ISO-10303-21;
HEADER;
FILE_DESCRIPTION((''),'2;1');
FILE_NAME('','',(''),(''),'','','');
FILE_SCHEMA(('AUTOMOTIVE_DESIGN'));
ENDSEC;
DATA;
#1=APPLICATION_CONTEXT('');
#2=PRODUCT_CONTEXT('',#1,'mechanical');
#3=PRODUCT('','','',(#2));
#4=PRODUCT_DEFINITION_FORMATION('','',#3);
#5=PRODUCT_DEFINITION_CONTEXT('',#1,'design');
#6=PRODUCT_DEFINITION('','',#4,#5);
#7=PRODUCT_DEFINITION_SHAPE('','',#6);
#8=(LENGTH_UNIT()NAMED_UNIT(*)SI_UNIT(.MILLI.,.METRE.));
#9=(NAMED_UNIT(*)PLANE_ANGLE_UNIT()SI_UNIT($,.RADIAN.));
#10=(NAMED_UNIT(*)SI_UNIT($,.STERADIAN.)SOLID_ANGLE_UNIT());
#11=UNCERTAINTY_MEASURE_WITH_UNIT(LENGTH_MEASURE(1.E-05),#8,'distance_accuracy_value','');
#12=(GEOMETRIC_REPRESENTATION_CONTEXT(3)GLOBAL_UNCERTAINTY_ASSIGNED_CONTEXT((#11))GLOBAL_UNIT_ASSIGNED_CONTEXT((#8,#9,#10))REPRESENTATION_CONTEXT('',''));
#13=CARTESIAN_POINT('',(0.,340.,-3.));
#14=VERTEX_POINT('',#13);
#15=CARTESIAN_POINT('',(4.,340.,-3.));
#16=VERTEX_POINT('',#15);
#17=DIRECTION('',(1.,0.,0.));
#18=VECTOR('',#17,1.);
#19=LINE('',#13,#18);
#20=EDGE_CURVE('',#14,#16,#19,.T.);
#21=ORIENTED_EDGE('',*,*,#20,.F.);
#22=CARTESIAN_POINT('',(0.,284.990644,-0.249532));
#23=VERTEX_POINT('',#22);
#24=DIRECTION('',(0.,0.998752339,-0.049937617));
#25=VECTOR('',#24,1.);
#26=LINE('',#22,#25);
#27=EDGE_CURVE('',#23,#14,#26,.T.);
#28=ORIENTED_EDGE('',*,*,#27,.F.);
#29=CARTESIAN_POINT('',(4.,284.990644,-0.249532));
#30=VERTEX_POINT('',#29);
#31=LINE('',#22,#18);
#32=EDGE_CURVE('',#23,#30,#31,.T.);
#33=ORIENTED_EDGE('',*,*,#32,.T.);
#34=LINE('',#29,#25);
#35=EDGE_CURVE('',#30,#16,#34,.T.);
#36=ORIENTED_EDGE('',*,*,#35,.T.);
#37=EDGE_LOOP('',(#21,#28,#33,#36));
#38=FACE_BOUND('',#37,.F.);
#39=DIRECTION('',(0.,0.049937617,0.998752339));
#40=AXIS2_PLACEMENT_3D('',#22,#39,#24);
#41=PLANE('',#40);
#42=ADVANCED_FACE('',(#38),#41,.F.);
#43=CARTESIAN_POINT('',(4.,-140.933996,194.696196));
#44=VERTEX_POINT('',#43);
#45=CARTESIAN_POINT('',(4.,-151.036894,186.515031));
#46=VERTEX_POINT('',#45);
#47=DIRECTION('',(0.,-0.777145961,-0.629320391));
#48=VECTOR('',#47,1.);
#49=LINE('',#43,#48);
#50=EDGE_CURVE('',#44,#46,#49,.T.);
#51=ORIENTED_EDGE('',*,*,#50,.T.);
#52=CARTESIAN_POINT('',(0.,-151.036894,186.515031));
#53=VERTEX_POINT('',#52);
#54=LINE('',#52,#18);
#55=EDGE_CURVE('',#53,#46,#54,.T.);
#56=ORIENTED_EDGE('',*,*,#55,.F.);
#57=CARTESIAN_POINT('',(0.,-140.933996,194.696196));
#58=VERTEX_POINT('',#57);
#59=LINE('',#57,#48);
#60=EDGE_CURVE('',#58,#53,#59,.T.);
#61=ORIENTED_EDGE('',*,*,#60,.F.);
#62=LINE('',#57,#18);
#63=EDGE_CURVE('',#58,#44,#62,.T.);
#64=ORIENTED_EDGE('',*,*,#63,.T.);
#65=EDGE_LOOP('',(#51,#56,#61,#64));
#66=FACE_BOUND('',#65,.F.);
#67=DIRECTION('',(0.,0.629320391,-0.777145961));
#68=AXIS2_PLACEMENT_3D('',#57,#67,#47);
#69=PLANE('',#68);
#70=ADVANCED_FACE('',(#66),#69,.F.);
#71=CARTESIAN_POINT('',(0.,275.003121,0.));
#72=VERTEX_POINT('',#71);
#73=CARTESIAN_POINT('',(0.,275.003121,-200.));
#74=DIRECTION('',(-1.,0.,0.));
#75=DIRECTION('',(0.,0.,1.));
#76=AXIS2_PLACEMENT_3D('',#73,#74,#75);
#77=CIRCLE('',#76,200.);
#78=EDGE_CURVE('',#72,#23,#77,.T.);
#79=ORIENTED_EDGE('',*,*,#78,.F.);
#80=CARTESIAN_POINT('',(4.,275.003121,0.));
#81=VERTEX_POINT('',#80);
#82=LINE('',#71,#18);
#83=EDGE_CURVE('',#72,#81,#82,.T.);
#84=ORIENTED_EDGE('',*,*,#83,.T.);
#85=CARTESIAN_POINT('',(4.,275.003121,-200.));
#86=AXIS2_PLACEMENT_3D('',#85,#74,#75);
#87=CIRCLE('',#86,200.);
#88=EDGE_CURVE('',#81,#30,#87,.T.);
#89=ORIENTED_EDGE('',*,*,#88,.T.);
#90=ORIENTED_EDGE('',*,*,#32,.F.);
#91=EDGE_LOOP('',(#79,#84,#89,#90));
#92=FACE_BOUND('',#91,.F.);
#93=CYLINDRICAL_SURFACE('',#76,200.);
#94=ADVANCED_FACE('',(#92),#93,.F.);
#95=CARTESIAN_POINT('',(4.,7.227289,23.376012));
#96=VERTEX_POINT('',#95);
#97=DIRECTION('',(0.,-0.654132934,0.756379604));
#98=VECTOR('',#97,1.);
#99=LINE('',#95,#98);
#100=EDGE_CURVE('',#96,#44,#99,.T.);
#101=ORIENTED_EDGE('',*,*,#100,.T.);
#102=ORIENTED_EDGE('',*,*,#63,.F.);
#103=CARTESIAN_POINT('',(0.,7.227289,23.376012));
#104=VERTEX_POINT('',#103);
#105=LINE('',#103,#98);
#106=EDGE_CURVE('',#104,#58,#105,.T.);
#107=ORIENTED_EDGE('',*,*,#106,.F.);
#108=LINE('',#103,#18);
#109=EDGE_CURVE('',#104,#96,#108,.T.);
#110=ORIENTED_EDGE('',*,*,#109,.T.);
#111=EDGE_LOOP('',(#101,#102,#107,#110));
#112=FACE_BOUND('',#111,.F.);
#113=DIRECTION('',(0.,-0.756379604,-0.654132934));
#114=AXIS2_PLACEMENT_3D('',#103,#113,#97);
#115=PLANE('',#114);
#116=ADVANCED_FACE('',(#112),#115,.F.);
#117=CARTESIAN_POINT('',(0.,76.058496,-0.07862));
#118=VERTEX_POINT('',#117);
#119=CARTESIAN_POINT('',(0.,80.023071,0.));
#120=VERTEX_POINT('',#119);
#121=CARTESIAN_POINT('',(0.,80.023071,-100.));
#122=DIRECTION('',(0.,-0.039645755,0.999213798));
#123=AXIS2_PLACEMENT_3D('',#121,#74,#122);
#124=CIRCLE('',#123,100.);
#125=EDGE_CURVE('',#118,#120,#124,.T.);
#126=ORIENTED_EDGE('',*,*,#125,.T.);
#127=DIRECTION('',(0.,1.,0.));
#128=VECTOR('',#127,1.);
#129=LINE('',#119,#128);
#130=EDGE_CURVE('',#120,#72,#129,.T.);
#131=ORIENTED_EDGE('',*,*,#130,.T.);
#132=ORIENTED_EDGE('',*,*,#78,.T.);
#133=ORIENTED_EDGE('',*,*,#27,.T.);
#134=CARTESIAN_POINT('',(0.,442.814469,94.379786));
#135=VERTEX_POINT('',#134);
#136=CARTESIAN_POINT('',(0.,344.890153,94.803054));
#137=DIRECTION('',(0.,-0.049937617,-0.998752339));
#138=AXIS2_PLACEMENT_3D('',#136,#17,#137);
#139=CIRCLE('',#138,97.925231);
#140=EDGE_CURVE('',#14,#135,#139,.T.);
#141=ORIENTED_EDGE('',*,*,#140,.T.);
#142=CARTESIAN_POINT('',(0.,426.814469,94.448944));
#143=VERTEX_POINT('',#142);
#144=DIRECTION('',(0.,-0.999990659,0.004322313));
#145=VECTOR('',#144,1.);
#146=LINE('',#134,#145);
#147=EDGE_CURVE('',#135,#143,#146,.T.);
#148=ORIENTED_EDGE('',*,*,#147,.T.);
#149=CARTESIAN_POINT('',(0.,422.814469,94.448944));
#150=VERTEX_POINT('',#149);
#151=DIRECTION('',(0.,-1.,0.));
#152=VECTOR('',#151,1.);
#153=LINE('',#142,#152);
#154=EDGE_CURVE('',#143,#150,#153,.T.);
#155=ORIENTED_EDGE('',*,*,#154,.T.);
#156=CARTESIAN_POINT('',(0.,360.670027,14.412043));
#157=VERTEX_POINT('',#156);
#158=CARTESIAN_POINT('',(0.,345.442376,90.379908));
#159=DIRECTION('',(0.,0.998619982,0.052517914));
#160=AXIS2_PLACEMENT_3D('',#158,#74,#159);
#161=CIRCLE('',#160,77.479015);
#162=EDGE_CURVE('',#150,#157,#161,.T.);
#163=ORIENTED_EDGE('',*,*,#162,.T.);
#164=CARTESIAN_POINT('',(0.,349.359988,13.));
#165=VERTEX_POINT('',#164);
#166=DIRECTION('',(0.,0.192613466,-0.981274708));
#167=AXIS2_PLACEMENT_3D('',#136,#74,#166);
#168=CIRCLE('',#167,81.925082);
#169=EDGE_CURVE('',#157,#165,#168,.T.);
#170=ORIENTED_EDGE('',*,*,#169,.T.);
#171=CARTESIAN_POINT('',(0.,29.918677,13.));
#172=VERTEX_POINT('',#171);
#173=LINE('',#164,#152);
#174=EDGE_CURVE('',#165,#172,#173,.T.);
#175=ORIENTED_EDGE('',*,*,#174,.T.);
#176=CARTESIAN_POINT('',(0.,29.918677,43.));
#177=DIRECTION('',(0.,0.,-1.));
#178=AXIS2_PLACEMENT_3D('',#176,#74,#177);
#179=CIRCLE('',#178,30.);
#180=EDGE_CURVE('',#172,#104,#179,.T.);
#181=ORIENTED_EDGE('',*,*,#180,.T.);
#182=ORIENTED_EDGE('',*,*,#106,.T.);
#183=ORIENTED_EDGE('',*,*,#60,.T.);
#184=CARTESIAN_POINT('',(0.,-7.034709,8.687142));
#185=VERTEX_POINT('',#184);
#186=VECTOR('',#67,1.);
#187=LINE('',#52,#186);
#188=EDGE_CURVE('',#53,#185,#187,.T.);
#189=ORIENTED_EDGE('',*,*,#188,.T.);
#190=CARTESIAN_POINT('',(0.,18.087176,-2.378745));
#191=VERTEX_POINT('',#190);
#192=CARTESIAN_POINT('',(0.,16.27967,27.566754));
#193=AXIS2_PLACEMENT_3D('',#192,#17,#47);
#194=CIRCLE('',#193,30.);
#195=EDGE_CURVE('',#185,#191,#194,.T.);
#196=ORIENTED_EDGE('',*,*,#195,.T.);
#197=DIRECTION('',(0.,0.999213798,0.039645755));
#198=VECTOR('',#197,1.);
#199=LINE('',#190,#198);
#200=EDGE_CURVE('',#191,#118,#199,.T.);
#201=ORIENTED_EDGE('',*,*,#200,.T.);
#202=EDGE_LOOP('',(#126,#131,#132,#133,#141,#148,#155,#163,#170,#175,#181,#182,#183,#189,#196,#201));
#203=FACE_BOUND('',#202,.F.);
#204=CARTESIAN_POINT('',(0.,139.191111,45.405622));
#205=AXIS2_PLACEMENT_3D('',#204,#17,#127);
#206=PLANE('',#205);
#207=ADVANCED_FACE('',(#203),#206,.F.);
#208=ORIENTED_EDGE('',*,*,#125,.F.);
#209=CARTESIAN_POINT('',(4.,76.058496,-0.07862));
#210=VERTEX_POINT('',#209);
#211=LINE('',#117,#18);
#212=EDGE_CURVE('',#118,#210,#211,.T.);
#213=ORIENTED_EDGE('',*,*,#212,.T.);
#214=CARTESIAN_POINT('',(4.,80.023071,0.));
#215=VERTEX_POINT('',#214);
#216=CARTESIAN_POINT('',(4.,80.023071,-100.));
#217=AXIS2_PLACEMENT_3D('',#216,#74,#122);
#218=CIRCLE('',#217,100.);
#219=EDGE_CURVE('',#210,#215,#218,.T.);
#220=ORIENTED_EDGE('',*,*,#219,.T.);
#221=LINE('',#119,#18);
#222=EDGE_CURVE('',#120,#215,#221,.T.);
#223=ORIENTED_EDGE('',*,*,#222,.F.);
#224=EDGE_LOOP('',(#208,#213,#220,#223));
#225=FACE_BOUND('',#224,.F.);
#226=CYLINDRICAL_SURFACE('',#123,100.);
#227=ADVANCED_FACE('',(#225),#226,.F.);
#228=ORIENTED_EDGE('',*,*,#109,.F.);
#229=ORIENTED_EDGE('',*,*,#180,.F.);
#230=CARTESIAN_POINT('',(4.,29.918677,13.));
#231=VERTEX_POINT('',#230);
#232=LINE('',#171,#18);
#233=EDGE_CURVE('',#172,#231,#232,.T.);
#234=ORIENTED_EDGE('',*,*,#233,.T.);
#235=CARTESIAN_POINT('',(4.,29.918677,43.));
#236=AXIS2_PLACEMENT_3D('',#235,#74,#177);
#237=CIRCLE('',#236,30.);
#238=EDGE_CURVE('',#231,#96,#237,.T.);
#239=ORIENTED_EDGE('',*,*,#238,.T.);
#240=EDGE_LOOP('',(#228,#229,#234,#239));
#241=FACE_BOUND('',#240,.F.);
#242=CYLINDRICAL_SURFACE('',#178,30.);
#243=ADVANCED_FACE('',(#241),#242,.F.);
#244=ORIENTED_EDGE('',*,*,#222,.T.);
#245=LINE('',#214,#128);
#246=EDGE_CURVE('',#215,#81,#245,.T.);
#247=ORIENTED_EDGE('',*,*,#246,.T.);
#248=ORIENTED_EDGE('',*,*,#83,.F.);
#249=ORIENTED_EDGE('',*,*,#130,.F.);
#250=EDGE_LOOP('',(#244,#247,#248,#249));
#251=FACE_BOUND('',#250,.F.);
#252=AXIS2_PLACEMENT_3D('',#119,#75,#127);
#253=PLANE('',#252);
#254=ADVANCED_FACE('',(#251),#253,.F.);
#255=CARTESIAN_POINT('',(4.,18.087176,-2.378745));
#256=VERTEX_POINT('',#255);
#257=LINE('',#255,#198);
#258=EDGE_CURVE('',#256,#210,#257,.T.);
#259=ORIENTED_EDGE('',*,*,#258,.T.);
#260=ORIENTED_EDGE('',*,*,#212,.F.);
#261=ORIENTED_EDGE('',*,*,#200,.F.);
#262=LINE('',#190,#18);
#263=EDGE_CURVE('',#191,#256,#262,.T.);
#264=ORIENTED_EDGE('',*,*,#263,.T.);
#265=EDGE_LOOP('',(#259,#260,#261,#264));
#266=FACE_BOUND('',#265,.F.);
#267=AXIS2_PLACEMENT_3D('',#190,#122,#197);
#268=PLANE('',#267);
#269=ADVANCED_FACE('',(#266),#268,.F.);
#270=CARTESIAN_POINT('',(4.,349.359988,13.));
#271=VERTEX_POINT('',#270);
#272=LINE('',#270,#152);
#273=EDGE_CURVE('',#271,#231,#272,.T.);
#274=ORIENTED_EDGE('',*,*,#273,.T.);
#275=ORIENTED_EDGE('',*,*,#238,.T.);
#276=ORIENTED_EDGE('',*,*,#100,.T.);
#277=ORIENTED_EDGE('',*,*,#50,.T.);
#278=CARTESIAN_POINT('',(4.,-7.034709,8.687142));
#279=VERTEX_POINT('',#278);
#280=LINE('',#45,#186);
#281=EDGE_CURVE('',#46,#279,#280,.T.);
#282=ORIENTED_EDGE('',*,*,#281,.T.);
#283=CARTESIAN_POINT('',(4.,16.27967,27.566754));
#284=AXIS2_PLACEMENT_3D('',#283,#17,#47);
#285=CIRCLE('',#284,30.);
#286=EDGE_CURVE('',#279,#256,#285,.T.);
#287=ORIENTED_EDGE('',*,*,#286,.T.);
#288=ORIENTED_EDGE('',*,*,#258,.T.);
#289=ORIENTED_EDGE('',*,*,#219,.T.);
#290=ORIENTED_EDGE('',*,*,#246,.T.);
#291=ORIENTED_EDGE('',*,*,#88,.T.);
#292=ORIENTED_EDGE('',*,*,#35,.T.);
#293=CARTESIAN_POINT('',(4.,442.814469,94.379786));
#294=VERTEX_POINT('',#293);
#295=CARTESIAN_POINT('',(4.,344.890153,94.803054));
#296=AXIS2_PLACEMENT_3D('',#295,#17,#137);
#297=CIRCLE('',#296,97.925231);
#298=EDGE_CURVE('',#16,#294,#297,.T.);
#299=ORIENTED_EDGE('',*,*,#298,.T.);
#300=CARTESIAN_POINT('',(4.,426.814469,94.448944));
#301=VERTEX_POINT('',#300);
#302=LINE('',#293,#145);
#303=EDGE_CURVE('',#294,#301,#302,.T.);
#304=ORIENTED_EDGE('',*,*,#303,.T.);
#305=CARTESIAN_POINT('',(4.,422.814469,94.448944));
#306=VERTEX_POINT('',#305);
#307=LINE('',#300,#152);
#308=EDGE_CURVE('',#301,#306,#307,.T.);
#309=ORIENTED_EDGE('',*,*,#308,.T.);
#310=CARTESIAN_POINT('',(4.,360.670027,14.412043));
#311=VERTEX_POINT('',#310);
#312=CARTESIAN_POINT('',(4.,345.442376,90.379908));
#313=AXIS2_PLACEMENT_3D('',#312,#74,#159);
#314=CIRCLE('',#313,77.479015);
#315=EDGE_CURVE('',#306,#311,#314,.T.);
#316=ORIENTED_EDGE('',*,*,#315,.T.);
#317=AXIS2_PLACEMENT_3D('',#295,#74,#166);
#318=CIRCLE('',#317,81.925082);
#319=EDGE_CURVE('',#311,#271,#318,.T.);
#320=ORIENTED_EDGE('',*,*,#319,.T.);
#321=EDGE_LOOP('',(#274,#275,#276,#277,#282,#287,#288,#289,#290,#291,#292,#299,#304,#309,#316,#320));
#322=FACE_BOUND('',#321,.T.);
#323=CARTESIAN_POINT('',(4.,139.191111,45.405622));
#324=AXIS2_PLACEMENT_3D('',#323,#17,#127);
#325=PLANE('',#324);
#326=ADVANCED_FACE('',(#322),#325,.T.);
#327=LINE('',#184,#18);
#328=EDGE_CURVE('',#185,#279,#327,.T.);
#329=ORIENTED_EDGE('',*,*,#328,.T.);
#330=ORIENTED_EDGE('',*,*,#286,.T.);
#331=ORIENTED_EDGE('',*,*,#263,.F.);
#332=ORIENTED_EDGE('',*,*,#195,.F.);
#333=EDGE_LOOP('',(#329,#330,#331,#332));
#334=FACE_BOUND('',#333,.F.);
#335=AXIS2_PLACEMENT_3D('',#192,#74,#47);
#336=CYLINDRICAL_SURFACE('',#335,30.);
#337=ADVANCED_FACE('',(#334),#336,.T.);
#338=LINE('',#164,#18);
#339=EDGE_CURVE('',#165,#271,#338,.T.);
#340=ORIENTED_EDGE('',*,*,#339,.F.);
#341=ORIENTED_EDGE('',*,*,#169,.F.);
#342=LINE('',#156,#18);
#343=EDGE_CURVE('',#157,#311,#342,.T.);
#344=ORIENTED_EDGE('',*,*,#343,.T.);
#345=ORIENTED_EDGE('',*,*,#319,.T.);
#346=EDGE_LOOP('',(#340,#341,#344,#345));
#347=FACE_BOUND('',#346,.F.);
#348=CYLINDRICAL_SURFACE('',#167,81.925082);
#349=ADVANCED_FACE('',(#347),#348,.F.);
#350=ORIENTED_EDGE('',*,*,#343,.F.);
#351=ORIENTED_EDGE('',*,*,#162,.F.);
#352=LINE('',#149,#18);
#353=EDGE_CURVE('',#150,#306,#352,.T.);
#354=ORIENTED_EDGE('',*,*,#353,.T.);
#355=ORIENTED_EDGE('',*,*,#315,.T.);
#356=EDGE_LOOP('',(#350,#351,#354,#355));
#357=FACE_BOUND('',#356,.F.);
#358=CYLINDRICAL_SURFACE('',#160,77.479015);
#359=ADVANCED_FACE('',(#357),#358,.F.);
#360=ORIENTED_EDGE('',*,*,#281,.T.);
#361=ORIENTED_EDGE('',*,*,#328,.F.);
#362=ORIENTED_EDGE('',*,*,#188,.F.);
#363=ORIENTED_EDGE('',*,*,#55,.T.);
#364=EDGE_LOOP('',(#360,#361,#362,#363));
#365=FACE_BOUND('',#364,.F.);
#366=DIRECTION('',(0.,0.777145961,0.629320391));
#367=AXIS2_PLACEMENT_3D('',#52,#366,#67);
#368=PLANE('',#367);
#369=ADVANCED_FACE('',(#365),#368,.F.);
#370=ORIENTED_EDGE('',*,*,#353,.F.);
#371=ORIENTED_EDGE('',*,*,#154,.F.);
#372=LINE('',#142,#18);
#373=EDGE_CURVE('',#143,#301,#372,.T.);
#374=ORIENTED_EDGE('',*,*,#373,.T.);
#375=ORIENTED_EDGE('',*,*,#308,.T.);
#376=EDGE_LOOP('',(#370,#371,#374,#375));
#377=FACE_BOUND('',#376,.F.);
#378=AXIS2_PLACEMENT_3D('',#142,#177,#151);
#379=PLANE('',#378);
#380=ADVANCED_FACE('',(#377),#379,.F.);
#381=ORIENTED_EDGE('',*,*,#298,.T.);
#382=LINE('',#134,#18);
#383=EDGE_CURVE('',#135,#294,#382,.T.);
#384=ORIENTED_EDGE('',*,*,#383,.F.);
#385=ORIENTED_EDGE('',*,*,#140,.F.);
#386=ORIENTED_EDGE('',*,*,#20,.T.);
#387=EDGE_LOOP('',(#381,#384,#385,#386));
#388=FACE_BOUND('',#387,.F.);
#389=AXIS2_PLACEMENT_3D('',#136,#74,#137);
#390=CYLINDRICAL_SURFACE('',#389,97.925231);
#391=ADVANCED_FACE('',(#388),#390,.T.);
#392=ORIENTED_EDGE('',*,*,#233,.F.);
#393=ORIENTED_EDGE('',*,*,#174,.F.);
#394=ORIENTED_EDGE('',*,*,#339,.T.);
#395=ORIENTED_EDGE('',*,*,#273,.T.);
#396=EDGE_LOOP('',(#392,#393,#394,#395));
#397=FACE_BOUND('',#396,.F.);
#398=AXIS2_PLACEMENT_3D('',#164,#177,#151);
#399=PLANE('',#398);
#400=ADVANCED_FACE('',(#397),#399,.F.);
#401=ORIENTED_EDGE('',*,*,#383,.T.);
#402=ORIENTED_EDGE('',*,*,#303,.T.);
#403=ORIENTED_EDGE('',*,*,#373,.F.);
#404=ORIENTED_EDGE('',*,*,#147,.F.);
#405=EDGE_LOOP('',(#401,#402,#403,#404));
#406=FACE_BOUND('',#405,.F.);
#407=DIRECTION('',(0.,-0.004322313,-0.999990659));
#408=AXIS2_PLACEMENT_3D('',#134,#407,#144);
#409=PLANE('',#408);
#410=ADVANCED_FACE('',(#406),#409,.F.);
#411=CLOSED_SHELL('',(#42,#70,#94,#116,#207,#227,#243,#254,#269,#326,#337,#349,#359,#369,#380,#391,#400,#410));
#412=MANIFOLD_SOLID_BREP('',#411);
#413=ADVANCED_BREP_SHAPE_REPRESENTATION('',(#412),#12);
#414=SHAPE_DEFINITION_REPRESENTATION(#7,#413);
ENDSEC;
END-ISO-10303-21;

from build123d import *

# Parameters (mm, degrees)
F1_DEPTH = 4


# Not quite as in the source:
# - a feature names something its author has since deleted; it is built from what else it names


with BuildPart() as f1:
    # F0 (on Right) → F1 (new body)
    with BuildSketch(Plane.YZ):
        with BuildLine():
            Line((-151.036893852, 186.5150307497), (-7.0347090015, 8.6871421429))
            ThreePointArc((-7.0347090015, 8.6871421429), (4.1862889829, 0.1122435093), (18.0871758973, -2.3787453176))
            Line((18.0871758973, -2.3787453176), (76.0584955576, -0.0786202013))
            ThreePointArc((76.0584955576, -0.0786202013), (78.0403935877, -0.0196569823), (80.023071087, 0))
            Line((80.023071087, 0), (275.0031210998, 0))
            ThreePointArc((275.0031210998, 0), (279.998441154, -0.0623927883), (284.9906444886, -0.2495322244))
            Line((284.9906444886, -0.2495322244), (340, -3))
            ThreePointArc((340, -3), (412.2291799256, 23.705892636), (442.8144690376, 94.379786148))
            Line((442.8144690376, 94.379786148), (426.8144690376, 94.448943804))
            Line((426.8144690376, 94.448943804), (422.8144690376, 94.448943804))
            ThreePointArc((422.8144690376, 94.448943804), (406.6400435708, 42.8631388402), (360.6700266042, 14.4120430259))
            ThreePointArc((360.6700266042, 14.4120430259), (355.0395932087, 13.5090940512), (349.3599875605, 13))
            Line((349.3599875605, 13), (29.918677403, 13))
            ThreePointArc((29.918677403, 13), (17.4430940609, 15.7170415777), (7.2272892953, 23.3760119817))
            Line((7.2272892953, 23.3760119817), (-140.933996353, 194.6961958333))
            Line((-140.933996353, 194.6961958333), (-151.036893852, 186.5150307497))
        make_face()
    extrude(amount=F1_DEPTH)


solid = f1.part
